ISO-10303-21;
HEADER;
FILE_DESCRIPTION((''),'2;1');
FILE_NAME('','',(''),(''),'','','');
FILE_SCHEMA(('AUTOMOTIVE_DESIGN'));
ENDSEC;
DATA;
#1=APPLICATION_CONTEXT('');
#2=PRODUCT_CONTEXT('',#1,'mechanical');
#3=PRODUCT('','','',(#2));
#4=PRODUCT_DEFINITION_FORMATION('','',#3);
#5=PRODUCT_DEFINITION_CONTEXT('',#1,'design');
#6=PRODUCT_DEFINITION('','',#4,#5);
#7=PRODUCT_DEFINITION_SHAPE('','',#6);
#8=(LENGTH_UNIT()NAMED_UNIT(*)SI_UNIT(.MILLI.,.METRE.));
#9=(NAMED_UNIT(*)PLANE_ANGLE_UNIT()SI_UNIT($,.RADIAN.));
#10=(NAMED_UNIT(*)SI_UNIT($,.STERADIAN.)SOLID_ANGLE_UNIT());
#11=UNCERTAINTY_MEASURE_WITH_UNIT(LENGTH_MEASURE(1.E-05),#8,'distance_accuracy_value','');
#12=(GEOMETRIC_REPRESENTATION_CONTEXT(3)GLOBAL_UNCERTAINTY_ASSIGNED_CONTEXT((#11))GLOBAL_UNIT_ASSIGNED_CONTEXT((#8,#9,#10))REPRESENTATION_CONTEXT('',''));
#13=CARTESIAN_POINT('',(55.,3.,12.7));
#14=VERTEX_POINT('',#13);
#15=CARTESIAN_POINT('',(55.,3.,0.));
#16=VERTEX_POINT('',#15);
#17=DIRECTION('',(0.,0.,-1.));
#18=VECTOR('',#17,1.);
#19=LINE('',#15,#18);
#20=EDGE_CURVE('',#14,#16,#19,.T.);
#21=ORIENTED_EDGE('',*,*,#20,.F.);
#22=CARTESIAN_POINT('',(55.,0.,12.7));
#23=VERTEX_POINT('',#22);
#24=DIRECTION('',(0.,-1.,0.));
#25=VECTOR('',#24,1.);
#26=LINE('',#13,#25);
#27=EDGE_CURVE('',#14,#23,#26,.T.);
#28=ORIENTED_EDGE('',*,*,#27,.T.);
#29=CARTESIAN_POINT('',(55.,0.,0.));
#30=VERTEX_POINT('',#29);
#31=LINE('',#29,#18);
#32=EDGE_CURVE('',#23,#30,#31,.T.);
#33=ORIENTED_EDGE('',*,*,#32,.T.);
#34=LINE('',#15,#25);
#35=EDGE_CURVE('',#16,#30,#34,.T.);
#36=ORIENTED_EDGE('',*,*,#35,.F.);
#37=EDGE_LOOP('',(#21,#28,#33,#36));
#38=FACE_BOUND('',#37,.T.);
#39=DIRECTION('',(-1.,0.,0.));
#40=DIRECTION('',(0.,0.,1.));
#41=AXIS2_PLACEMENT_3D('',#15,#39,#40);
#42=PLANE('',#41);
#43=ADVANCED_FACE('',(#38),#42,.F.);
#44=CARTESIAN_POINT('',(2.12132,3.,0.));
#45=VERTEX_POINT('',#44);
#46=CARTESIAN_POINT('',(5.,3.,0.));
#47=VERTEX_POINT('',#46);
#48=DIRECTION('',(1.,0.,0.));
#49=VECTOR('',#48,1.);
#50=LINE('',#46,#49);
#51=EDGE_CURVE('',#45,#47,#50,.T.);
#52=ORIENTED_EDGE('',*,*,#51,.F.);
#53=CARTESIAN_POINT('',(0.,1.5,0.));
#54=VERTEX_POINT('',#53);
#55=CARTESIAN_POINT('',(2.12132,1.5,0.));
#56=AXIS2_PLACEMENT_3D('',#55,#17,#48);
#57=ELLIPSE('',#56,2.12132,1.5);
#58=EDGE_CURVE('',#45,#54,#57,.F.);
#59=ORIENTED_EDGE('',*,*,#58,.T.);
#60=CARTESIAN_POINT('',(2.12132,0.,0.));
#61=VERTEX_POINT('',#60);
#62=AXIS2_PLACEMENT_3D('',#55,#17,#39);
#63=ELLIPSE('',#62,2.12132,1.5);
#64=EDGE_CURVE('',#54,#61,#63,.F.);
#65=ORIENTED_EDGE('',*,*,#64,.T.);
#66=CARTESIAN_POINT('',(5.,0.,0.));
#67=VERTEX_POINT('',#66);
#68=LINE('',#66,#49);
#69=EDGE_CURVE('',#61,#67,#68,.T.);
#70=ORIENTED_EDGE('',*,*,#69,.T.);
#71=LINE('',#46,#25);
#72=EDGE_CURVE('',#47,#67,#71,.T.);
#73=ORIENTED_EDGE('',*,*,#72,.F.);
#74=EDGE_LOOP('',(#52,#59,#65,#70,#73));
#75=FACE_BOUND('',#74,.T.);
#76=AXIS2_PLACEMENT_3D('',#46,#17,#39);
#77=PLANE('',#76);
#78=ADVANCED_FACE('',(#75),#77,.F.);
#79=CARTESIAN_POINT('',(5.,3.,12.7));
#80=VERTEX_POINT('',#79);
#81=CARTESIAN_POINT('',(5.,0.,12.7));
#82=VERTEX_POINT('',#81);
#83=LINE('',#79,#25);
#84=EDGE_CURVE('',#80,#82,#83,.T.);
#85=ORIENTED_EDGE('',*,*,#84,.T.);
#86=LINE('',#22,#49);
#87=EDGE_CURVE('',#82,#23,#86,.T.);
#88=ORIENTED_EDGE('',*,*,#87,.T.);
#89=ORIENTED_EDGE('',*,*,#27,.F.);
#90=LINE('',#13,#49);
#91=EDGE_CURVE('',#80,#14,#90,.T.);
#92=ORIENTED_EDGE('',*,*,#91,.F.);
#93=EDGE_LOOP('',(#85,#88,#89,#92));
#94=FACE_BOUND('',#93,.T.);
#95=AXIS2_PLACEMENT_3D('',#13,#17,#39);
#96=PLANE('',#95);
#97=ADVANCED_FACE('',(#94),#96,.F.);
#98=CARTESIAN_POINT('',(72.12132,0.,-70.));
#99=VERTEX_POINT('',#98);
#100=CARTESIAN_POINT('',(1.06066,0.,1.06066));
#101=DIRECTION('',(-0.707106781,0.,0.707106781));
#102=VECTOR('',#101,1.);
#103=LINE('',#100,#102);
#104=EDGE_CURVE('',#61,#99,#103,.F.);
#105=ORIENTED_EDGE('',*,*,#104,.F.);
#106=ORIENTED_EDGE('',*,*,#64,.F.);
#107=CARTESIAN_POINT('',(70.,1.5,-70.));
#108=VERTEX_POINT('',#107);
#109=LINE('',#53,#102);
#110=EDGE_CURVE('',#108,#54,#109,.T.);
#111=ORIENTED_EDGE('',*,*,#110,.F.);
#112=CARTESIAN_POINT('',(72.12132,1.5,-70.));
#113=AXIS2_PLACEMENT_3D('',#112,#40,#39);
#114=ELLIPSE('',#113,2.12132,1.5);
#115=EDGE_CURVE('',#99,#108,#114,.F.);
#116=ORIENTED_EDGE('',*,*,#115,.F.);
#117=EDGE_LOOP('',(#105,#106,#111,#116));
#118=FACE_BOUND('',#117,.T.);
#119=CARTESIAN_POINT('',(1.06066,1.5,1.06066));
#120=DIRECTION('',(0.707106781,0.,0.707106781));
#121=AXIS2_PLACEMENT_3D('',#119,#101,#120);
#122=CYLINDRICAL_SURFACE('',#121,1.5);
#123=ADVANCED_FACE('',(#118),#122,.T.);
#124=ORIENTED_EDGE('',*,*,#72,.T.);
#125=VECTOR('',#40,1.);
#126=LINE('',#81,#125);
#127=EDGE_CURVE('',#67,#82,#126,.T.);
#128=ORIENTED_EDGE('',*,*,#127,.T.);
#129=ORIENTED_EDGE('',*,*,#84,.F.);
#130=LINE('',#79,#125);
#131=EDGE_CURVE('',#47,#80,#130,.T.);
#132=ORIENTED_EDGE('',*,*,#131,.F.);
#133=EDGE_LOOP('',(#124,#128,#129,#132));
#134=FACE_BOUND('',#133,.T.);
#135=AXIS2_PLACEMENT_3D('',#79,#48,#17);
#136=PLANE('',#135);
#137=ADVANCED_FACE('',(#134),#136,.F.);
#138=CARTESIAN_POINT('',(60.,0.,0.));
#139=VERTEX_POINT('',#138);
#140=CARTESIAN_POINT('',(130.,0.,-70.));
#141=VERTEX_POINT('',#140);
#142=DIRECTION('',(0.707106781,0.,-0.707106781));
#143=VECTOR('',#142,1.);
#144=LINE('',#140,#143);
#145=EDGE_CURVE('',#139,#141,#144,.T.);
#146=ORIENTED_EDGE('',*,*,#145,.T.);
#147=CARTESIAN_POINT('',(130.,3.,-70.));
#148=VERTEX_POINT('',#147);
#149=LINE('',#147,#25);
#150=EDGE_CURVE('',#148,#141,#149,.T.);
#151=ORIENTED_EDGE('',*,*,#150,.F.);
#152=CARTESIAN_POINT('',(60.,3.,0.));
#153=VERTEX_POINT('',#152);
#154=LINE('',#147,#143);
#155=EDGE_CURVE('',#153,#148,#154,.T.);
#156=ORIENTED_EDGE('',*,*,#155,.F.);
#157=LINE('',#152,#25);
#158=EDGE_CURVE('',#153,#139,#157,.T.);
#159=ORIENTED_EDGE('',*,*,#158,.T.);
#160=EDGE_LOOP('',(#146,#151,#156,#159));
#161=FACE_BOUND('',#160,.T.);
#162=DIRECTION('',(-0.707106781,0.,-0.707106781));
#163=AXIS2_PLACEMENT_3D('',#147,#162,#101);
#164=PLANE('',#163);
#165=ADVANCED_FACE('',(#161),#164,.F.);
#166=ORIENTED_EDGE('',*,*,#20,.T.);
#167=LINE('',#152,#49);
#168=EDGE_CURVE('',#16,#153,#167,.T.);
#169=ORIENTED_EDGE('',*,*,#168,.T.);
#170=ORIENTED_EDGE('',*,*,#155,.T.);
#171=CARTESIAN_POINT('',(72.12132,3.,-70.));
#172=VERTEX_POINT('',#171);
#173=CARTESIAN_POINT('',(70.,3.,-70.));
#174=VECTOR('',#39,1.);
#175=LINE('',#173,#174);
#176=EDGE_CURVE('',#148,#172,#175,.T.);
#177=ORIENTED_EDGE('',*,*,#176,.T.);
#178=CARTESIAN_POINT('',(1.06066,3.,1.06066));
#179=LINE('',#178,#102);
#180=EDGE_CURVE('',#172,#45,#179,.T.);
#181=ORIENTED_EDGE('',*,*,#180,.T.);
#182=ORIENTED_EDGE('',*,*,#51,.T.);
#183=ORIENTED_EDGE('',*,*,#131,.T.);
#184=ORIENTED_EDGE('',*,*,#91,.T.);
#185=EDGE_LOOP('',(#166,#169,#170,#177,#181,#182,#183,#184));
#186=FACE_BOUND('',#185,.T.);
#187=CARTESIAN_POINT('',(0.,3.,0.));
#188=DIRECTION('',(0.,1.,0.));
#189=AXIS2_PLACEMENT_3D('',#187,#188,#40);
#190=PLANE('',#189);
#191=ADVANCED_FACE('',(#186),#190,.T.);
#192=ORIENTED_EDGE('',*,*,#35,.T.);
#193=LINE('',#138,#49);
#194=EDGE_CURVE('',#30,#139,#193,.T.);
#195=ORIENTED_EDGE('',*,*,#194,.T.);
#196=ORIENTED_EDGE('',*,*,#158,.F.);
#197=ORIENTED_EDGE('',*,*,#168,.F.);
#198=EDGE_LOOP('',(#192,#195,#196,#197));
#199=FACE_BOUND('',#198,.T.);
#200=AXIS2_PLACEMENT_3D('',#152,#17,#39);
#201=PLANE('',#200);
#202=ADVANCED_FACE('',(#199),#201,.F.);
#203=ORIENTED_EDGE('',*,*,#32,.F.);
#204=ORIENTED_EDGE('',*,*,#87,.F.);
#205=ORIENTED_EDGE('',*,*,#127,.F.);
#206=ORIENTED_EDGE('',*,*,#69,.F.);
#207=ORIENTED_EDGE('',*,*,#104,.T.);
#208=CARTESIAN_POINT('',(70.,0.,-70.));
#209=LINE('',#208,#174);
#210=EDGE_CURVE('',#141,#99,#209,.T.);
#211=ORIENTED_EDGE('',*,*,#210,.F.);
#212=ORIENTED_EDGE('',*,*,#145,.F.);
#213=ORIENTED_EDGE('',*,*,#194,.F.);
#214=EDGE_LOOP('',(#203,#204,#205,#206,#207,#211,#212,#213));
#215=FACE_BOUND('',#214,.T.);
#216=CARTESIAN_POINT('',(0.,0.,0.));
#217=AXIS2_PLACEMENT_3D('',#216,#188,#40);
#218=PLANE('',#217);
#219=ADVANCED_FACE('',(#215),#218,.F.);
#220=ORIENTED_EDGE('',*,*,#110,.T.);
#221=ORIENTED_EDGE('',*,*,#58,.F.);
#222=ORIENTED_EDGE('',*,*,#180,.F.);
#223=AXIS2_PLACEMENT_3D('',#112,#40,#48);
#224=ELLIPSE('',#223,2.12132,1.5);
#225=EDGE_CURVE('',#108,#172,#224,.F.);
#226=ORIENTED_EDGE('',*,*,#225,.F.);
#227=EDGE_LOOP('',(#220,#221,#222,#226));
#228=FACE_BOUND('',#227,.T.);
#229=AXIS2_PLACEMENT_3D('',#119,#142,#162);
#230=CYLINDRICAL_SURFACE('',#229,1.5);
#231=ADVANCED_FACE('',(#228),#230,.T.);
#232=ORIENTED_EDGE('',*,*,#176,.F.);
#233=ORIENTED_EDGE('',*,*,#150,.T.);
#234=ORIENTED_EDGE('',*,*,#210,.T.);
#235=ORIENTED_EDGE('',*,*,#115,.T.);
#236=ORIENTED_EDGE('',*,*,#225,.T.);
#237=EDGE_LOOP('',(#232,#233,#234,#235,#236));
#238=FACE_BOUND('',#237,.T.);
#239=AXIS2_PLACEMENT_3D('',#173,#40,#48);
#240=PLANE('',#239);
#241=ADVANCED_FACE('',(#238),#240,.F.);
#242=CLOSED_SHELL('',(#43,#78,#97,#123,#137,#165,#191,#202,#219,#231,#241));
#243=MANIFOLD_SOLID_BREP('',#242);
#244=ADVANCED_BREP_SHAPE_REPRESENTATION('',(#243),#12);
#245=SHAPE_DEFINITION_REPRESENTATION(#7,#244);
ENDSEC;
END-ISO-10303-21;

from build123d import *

# Parameters (mm, degrees)
BOSS_EXTRUDE2_DEPTH = 3
FILLET1_R           = 1.5


with BuildPart() as part:
    # Sketch1 → Boss-Extrude2 (new body)
    with BuildSketch(Plane(origin=(0, 0, 0), x_dir=(1, 0, 0), z_dir=(0, 1, 0))):
        Polygon((0, 0), (70, 70), (130, 70), (60, 0), (55, 0), (55, -12.7), (5, -12.7), (5, 0), align=None)
    extrude(amount=BOSS_EXTRUDE2_DEPTH)

    # Fillet1
    fillet1_edges = [part.edges().sort_by_distance(p)[0] for p in [
        (35, 3, -35),
        (35, 0, -35),
    ]]
    fillet(fillet1_edges, radius=FILLET1_R - 0.0001)  # a hair under: the kernel refuses the full size


solid = part.part
